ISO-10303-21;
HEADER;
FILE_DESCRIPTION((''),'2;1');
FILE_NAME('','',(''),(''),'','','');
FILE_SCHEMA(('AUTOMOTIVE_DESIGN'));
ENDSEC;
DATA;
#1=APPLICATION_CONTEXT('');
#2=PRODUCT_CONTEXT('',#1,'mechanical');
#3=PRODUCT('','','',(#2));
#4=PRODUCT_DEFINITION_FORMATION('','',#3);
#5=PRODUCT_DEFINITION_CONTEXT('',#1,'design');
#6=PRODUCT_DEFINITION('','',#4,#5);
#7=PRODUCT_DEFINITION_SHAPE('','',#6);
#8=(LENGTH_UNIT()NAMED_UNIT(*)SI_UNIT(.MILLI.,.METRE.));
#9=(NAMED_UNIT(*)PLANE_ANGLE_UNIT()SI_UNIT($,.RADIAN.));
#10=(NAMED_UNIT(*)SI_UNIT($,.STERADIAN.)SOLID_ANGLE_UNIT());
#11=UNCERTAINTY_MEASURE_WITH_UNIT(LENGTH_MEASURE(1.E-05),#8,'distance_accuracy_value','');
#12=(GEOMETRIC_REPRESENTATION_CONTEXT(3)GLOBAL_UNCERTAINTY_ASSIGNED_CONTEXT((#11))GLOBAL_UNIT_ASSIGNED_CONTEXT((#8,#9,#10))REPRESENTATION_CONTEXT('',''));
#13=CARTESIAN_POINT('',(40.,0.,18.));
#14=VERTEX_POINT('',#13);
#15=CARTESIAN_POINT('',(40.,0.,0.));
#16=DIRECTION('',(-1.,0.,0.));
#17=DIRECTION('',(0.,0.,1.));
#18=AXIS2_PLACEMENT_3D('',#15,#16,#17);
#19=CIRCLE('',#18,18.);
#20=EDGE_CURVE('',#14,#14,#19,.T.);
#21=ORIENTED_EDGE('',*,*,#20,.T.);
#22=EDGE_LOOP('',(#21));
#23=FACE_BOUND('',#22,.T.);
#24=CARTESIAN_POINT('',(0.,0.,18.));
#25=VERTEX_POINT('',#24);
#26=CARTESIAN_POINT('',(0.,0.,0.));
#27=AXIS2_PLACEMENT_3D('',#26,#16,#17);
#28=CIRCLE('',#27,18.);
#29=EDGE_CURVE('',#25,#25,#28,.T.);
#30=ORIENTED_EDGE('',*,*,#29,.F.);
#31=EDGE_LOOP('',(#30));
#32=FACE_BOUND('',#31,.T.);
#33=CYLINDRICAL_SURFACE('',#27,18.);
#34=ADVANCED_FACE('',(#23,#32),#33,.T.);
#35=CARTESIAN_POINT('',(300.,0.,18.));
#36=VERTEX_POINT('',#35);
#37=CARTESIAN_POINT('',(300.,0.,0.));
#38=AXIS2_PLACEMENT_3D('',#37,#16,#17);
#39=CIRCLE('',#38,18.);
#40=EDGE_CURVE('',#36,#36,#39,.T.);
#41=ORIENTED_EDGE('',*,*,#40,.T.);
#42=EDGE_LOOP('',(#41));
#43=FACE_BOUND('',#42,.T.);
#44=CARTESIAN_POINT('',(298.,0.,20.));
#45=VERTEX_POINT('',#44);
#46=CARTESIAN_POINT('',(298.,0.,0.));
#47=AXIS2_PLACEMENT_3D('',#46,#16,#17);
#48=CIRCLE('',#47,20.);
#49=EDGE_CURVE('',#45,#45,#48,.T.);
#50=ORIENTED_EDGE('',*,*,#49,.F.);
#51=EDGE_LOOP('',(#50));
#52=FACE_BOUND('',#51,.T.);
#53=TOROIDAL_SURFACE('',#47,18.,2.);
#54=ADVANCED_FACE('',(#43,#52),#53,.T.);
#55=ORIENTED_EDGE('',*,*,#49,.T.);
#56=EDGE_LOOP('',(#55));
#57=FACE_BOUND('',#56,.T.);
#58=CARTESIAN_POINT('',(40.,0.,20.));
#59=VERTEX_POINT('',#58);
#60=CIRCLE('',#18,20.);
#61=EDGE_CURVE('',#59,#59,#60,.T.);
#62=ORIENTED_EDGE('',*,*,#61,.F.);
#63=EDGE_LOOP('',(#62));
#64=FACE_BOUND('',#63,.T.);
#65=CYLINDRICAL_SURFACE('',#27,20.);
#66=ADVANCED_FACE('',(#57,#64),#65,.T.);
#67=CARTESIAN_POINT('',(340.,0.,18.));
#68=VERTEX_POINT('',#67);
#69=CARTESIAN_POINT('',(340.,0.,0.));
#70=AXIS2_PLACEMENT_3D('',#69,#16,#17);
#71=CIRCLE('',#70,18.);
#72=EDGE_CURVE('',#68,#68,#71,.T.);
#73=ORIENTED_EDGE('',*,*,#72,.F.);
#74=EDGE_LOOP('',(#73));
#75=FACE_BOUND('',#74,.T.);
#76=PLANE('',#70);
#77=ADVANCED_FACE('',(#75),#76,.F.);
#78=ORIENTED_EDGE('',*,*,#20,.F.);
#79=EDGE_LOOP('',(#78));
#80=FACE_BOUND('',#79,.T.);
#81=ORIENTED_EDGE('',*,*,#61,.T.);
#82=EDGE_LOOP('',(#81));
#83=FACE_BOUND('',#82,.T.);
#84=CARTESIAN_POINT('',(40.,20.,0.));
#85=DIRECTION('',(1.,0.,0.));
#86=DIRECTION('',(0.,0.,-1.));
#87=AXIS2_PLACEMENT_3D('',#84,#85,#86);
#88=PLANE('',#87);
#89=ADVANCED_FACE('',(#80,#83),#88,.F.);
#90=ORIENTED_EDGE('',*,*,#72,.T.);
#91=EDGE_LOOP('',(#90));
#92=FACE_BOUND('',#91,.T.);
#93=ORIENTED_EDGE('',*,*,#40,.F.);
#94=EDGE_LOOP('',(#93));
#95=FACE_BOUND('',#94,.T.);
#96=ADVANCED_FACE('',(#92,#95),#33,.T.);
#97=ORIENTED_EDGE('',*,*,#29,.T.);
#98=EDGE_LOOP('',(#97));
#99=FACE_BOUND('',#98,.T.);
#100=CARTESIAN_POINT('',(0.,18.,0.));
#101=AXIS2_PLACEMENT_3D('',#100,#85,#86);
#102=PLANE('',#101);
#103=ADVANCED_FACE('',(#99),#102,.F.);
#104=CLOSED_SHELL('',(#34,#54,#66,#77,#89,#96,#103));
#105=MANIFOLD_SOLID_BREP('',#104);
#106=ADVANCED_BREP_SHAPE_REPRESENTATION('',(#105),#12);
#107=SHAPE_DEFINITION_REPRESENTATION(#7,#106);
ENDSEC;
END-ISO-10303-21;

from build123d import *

# Parameters (mm, degrees)
FILLET_1_R = 2


with BuildPart() as part:
    # 草图8 → 旋转1 (revolve)
    with BuildSketch(Plane.XY, mode=Mode.PRIVATE) as revolve_1_sk:
        Polygon((0, 0), (340, 0), (340, 18), (300, 18), (300, 20), (40, 20), (40, 18), (0, 18), align=None)
    revolve(revolve_1_sk.sketch.rotate(Axis((0, 0, 0), (1, 0, 0)), 90), axis=Axis((0, 0, 0), (1, 0, 0)))

    # 圆角1
    fillet_1_edges = [part.edges().sort_by_distance(p)[0] for p in [
        (300, 0, -20),
    ]]
    fillet(fillet_1_edges, radius=FILLET_1_R - 0.0001)  # a hair under: the kernel refuses the full size


solid = part.part
